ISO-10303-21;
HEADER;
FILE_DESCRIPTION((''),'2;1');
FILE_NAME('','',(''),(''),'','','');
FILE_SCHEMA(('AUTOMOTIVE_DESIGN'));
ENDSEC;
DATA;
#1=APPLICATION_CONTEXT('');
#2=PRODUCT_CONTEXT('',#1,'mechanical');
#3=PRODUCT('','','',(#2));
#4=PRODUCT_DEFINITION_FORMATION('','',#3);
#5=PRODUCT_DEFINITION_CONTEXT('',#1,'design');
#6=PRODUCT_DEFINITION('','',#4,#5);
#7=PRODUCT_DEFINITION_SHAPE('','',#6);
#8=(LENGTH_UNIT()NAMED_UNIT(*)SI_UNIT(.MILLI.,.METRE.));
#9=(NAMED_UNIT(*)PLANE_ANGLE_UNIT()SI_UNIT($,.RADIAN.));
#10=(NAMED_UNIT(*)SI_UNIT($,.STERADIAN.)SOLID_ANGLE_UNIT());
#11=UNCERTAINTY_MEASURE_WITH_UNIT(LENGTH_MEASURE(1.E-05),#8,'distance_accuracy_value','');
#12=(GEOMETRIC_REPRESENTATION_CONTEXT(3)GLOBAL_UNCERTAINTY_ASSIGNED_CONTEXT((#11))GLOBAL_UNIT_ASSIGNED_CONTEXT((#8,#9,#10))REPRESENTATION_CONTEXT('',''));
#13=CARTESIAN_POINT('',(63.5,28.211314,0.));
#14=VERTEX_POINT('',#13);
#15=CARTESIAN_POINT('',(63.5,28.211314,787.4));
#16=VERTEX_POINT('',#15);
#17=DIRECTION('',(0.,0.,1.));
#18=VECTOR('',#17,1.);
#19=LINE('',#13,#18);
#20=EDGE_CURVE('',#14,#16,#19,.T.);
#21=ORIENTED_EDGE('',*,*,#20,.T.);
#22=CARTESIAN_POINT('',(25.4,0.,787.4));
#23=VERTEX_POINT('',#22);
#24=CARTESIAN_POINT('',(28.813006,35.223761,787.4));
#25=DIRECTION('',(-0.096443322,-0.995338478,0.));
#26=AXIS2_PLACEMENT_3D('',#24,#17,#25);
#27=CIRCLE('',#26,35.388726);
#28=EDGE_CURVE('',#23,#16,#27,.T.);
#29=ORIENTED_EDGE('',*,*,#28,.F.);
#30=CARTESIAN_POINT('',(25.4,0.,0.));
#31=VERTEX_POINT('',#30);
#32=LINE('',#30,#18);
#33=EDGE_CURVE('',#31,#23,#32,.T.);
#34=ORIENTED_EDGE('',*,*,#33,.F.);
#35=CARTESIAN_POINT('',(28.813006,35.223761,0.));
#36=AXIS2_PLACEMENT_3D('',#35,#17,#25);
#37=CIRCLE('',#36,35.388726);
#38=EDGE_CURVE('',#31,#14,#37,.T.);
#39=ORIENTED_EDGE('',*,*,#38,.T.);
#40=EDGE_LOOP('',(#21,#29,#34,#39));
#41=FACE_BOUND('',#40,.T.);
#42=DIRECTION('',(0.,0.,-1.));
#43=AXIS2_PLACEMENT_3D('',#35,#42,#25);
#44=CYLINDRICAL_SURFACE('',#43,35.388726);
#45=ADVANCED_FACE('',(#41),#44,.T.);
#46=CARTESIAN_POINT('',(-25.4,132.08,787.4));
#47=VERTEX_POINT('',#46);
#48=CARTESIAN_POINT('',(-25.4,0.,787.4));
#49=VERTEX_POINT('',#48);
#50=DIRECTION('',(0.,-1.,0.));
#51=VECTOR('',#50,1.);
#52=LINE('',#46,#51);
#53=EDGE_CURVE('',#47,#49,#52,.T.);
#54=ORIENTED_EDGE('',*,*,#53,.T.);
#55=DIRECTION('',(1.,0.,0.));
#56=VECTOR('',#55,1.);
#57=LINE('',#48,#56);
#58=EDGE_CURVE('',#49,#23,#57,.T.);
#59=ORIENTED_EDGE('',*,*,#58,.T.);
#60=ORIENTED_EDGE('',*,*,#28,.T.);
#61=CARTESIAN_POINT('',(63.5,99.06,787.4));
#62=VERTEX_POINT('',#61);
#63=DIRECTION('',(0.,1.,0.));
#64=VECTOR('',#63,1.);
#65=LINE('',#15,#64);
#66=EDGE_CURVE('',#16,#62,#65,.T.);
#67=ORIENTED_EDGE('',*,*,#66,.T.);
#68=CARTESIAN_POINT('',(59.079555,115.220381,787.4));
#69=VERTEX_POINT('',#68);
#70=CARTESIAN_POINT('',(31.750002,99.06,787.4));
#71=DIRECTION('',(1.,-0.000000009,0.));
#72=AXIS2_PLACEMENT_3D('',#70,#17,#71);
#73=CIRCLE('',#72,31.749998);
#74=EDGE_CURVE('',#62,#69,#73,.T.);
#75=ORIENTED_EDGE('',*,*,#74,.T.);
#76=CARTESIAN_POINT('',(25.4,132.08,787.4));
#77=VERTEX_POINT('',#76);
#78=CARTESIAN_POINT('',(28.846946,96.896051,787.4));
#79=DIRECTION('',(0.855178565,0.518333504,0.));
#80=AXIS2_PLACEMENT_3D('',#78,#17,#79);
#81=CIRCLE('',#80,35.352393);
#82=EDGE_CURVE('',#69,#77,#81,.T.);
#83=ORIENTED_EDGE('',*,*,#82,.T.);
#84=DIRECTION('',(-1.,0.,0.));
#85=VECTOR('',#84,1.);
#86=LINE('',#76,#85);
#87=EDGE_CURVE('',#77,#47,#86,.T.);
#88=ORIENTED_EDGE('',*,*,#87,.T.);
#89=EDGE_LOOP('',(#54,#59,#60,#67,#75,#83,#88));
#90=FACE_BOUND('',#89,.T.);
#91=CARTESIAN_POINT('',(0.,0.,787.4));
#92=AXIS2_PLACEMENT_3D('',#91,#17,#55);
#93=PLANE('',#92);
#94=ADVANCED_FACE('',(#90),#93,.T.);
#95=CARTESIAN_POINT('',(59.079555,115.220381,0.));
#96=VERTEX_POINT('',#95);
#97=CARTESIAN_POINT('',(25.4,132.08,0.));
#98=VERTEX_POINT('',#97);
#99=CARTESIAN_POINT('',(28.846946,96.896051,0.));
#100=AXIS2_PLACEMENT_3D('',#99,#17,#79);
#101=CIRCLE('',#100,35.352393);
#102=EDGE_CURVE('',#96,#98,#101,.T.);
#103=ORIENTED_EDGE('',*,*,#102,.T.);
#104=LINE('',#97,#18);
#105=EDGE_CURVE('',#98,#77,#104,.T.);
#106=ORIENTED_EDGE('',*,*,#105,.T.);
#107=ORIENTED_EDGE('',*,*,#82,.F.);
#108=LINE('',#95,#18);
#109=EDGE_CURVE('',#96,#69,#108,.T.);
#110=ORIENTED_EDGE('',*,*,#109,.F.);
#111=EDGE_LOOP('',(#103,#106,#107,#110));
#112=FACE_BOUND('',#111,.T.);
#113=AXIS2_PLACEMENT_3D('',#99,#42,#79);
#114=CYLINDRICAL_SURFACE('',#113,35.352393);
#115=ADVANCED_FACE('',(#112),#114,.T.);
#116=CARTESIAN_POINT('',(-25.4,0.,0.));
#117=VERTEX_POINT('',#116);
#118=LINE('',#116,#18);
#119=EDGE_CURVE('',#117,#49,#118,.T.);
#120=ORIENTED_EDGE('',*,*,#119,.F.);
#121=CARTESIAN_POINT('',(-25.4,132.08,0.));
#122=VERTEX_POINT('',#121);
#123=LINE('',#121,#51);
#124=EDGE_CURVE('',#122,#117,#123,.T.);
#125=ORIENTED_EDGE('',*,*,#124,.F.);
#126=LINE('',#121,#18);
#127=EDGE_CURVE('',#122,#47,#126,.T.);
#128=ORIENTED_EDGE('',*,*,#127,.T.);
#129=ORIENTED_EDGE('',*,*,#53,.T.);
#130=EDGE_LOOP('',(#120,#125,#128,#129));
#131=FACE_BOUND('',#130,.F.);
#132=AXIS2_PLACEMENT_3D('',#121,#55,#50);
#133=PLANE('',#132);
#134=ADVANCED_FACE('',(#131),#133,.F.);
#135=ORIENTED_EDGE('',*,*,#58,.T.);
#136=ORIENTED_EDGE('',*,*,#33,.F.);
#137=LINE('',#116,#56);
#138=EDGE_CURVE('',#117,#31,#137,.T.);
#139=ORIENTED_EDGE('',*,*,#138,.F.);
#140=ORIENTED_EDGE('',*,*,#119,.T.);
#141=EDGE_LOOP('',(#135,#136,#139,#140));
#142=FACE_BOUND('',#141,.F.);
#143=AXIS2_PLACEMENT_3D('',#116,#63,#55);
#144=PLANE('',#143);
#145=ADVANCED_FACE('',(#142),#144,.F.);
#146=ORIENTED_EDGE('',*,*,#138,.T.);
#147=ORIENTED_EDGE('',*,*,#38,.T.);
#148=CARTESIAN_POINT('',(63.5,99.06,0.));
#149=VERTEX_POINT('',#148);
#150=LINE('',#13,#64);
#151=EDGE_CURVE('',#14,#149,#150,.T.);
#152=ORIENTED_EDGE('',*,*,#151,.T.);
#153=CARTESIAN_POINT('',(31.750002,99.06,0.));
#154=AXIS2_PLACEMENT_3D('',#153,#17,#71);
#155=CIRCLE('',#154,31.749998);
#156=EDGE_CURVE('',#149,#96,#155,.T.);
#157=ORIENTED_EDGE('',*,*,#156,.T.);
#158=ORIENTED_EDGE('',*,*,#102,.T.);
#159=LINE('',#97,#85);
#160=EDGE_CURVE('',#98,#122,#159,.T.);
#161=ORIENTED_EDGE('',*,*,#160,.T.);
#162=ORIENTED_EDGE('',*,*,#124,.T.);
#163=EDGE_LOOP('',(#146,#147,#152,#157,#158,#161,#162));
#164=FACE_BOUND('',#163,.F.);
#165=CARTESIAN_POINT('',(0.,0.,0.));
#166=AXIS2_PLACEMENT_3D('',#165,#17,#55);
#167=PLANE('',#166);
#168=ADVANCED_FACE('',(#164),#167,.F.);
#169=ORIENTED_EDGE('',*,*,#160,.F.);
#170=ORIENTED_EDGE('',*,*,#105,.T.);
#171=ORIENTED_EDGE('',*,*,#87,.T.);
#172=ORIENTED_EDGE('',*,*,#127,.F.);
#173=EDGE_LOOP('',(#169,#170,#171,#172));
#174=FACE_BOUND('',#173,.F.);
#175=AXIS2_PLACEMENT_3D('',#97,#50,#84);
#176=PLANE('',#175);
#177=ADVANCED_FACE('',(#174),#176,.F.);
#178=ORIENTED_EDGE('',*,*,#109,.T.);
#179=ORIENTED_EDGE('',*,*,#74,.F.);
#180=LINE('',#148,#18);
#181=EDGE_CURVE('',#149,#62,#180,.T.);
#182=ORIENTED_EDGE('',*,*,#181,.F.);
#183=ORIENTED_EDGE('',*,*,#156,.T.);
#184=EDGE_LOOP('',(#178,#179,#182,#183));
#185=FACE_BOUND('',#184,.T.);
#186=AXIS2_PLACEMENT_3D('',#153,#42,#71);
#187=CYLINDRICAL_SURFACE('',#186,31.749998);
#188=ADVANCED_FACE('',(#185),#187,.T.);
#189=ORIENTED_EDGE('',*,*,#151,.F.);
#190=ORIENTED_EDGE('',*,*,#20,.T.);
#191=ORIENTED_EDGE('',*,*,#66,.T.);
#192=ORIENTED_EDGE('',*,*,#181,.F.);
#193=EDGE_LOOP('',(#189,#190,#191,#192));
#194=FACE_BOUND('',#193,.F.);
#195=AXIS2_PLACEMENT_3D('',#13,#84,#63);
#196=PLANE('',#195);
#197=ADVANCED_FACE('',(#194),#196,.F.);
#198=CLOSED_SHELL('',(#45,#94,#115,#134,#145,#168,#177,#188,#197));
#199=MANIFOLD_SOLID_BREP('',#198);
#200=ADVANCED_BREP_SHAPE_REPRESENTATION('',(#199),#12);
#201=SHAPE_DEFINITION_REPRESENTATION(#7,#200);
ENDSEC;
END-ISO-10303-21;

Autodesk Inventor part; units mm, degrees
ref_plane "YZ Plane" through (0, 0, 0) normal (1, 0, 0) x (0, 1, 0)
ref_plane "XZ Plane" through (0, 0, 0) normal (0, 1, 0) x (-1, 0, 0)
ref_plane "XY Plane" through (0, 0, 0) normal (0, 0, 1) x (1, 0, 0)
sketch "Sketch1" plane through (0, 0, 0) normal (0, 0, 1) x (1, 0, 0)
  line L0 (0, 0) -> (0, 132.08)
  line L1 (0, 132.08) -> (25.4, 132.08)
  line L2 (0, 66.04) -> (63.5, 66.04)
  line L3 (0, 132.08) -> (0, 66.04)
  line L4 (0, 99.06) -> (31.75, 99.06)
  arc A0 (63.5, 99.06) -> (55.043838, 120.634513) centre (31.75, 99.06) ccw
  line L5 (0, 66.04) -> (0, 0)
  arc A1 (54.194148, 10.562869) -> (63.5, 33.02) centre (31.75, 33.02) ccw
  line L6 (63.5, 28.211314) -> (63.5, 99.06)
  arc A2 (59.079555, 115.220381) -> (25.4, 132.08) centre (28.846947, 96.896052) ccw
  line L7 (0, 0) -> (25.4, 0)
  arc A3 (25.4, 0) -> (63.5, 28.211314) centre (28.813006, 35.223762) ccw
  line L8 (0, 132.08) -> (-25.4, 132.08)
  line L9 (0, 1.27) -> (0, 132.08)
  line L10 (0, 132.08) -> (-25.4, 132.08)
  line L11 (-25.4, 132.08) -> (-25.4, 1.27)
  line L12 (-25.4, 0) -> (0, 0)
  line L13 (0, 0) -> (0, 132.08)
  line L14 (0, 132.08) -> (-25.4, 132.08)
  line L15 (-25.4, 132.08) -> (-25.4, 0)
  dimension "d0" = 132.08
  dimension "d1" = 25.4
  dimension "d2" = 63.5
  dimension "d3" = 25.4
  dimension "d4" = 25.4
sketch "Sketch1 outline for Extrusion1" plane through (0, 0, 0) normal (0, 0, 1) x (1, 0, 0)
  line L0 (-25.4, 0) -> (25.4, 0)
  arc A0 (25.4, 0) -> (63.5, 28.211314) centre (28.813006, 35.223762) ccw
  line L1 (63.5, 28.211314) -> (63.5, 99.06)
  arc A1 (63.5, 99.06) -> (59.079555, 115.220381) centre (31.75, 99.06) ccw
  arc A2 (59.079555, 115.220381) -> (25.4, 132.08) centre (28.846947, 96.896052) ccw
  line L2 (25.4, 132.08) -> (-25.4, 132.08)
  line L3 (-25.4, 132.08) -> (-25.4, 0)
extrude "Extrusion1" add sketch "Sketch1 outline for Extrusion1" along normal blind 787.4
properties part number "Robot Bumper (31 inches)"
